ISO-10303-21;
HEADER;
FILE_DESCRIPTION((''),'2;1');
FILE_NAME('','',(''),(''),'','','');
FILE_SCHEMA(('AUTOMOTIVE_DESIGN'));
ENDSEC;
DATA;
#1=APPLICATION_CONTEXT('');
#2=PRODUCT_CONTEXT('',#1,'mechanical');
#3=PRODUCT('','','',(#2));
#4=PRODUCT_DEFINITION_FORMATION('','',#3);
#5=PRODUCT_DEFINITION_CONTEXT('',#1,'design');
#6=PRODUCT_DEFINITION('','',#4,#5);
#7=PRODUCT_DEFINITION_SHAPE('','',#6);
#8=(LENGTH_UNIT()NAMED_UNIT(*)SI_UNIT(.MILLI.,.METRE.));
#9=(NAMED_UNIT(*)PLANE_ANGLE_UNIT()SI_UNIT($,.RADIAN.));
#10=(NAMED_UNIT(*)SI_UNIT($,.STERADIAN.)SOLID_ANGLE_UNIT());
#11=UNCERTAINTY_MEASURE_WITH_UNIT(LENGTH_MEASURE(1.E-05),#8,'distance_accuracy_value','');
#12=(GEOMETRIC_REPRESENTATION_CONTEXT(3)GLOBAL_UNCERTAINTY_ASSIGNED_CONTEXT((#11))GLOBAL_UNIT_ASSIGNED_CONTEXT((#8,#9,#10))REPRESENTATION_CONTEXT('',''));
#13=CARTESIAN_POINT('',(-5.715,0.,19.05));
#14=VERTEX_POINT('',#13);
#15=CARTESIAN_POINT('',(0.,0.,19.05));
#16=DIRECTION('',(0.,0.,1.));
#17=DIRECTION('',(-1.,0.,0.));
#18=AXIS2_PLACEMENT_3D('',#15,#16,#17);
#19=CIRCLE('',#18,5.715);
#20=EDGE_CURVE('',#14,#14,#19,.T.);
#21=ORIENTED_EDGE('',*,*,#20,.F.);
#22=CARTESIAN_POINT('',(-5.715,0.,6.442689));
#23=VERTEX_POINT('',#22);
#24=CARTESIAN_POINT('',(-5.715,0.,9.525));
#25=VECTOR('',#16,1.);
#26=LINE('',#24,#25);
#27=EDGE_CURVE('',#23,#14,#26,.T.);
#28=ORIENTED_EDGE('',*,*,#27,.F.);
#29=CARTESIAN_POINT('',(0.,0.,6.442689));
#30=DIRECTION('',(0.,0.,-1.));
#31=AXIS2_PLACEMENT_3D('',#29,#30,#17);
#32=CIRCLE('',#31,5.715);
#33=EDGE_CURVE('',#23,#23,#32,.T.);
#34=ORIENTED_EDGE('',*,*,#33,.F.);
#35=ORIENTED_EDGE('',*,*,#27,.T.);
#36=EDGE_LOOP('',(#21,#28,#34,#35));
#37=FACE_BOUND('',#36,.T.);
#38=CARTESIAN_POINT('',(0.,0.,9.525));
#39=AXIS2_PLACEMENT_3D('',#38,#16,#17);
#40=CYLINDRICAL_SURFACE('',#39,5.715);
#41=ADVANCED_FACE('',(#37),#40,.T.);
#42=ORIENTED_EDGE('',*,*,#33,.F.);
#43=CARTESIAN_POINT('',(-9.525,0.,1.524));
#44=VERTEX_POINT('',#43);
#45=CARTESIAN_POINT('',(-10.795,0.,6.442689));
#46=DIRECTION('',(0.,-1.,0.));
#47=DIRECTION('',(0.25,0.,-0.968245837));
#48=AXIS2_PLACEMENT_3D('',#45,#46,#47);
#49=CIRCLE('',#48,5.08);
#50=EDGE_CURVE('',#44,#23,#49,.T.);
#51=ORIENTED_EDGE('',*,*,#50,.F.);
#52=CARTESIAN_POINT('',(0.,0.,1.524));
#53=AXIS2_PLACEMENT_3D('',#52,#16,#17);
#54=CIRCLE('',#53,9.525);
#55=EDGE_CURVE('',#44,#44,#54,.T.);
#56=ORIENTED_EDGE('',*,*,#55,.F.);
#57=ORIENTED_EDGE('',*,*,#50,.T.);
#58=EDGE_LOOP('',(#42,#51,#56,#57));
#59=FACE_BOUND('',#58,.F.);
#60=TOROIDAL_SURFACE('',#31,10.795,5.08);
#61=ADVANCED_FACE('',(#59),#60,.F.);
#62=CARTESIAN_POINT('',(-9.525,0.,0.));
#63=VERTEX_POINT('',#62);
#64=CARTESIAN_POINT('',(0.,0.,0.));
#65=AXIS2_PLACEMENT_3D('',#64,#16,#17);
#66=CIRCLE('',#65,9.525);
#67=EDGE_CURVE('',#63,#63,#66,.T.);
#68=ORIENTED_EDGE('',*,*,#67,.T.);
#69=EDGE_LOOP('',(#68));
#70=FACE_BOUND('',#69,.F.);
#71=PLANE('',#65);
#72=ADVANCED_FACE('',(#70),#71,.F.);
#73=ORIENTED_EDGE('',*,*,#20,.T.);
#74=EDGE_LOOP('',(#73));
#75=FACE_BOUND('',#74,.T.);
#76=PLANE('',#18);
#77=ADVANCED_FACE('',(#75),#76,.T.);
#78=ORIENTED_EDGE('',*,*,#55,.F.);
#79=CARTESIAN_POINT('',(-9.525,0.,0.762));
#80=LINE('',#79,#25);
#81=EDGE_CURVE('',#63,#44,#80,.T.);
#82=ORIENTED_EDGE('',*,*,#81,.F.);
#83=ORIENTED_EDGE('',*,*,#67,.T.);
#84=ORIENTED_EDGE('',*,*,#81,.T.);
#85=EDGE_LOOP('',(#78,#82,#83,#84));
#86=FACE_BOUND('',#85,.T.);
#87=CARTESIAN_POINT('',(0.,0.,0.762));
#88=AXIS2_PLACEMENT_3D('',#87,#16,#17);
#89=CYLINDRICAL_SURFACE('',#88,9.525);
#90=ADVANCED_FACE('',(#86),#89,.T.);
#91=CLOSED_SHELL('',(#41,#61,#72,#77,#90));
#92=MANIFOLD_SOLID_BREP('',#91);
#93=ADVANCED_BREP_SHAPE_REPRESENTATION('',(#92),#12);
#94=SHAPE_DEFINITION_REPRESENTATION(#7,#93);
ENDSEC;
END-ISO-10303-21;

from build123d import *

# Parameters (mm, degrees)
F0_W = 9.525
F0_H = 1.524
F2_W = 5.715
F2_H = 19.05


# Not quite as in the source:
# - a fillet or chamfer that OpenCascade refuses, or shapes differently, is made with other operations: its cross-section is extruded or revolved along the edge and cut away or added


with BuildPart() as f1:
    # F0 (on Front) → F1 (revolve)
    with BuildSketch(Plane.XZ):
        with Locations((-4.7625, 0.762)):
            Rectangle(F0_W, F0_H)
    revolve(axis=Axis((0, 0, 0.762), (0, 0, 1)))

    # F2 (on Front) → F3 (revolve)
    with BuildSketch(Plane.XZ):
        with Locations((-2.8575, 9.525)):
            Rectangle(F2_W, F2_H)
    revolve(axis=Axis((0, 0, 9.525), (0, 0, 1)))

    # F4: fillet of radius 5.08 on 1 edges, made by hand

    # F4_s1 → F4_t2 (revolve)
    with BuildSketch(Plane.XZ):
        with BuildLine():
            ThreePointArc((-9.525, 1.524), (-6.7789073716, 3.3318368763), (-5.715, 6.4426888497))
            Line((-5.715, 6.4426888497), (-5.6134, 6.4426888497))
            Line((-5.6134, 6.4426888497), (-5.6134, 1.524))
            Line((-5.6134, 1.524), (-5.715, 1.4224))
            ThreePointArc((-5.715, 1.4224), (-7.62, 1.4224), (-9.4996, 1.425626223))
            Line((-9.4996, 1.425626223), (-9.525, 1.524))
        make_face()
    revolve(axis=Axis((0, 0, 1.524), (0, 0, -1)))


solid = f1.part
